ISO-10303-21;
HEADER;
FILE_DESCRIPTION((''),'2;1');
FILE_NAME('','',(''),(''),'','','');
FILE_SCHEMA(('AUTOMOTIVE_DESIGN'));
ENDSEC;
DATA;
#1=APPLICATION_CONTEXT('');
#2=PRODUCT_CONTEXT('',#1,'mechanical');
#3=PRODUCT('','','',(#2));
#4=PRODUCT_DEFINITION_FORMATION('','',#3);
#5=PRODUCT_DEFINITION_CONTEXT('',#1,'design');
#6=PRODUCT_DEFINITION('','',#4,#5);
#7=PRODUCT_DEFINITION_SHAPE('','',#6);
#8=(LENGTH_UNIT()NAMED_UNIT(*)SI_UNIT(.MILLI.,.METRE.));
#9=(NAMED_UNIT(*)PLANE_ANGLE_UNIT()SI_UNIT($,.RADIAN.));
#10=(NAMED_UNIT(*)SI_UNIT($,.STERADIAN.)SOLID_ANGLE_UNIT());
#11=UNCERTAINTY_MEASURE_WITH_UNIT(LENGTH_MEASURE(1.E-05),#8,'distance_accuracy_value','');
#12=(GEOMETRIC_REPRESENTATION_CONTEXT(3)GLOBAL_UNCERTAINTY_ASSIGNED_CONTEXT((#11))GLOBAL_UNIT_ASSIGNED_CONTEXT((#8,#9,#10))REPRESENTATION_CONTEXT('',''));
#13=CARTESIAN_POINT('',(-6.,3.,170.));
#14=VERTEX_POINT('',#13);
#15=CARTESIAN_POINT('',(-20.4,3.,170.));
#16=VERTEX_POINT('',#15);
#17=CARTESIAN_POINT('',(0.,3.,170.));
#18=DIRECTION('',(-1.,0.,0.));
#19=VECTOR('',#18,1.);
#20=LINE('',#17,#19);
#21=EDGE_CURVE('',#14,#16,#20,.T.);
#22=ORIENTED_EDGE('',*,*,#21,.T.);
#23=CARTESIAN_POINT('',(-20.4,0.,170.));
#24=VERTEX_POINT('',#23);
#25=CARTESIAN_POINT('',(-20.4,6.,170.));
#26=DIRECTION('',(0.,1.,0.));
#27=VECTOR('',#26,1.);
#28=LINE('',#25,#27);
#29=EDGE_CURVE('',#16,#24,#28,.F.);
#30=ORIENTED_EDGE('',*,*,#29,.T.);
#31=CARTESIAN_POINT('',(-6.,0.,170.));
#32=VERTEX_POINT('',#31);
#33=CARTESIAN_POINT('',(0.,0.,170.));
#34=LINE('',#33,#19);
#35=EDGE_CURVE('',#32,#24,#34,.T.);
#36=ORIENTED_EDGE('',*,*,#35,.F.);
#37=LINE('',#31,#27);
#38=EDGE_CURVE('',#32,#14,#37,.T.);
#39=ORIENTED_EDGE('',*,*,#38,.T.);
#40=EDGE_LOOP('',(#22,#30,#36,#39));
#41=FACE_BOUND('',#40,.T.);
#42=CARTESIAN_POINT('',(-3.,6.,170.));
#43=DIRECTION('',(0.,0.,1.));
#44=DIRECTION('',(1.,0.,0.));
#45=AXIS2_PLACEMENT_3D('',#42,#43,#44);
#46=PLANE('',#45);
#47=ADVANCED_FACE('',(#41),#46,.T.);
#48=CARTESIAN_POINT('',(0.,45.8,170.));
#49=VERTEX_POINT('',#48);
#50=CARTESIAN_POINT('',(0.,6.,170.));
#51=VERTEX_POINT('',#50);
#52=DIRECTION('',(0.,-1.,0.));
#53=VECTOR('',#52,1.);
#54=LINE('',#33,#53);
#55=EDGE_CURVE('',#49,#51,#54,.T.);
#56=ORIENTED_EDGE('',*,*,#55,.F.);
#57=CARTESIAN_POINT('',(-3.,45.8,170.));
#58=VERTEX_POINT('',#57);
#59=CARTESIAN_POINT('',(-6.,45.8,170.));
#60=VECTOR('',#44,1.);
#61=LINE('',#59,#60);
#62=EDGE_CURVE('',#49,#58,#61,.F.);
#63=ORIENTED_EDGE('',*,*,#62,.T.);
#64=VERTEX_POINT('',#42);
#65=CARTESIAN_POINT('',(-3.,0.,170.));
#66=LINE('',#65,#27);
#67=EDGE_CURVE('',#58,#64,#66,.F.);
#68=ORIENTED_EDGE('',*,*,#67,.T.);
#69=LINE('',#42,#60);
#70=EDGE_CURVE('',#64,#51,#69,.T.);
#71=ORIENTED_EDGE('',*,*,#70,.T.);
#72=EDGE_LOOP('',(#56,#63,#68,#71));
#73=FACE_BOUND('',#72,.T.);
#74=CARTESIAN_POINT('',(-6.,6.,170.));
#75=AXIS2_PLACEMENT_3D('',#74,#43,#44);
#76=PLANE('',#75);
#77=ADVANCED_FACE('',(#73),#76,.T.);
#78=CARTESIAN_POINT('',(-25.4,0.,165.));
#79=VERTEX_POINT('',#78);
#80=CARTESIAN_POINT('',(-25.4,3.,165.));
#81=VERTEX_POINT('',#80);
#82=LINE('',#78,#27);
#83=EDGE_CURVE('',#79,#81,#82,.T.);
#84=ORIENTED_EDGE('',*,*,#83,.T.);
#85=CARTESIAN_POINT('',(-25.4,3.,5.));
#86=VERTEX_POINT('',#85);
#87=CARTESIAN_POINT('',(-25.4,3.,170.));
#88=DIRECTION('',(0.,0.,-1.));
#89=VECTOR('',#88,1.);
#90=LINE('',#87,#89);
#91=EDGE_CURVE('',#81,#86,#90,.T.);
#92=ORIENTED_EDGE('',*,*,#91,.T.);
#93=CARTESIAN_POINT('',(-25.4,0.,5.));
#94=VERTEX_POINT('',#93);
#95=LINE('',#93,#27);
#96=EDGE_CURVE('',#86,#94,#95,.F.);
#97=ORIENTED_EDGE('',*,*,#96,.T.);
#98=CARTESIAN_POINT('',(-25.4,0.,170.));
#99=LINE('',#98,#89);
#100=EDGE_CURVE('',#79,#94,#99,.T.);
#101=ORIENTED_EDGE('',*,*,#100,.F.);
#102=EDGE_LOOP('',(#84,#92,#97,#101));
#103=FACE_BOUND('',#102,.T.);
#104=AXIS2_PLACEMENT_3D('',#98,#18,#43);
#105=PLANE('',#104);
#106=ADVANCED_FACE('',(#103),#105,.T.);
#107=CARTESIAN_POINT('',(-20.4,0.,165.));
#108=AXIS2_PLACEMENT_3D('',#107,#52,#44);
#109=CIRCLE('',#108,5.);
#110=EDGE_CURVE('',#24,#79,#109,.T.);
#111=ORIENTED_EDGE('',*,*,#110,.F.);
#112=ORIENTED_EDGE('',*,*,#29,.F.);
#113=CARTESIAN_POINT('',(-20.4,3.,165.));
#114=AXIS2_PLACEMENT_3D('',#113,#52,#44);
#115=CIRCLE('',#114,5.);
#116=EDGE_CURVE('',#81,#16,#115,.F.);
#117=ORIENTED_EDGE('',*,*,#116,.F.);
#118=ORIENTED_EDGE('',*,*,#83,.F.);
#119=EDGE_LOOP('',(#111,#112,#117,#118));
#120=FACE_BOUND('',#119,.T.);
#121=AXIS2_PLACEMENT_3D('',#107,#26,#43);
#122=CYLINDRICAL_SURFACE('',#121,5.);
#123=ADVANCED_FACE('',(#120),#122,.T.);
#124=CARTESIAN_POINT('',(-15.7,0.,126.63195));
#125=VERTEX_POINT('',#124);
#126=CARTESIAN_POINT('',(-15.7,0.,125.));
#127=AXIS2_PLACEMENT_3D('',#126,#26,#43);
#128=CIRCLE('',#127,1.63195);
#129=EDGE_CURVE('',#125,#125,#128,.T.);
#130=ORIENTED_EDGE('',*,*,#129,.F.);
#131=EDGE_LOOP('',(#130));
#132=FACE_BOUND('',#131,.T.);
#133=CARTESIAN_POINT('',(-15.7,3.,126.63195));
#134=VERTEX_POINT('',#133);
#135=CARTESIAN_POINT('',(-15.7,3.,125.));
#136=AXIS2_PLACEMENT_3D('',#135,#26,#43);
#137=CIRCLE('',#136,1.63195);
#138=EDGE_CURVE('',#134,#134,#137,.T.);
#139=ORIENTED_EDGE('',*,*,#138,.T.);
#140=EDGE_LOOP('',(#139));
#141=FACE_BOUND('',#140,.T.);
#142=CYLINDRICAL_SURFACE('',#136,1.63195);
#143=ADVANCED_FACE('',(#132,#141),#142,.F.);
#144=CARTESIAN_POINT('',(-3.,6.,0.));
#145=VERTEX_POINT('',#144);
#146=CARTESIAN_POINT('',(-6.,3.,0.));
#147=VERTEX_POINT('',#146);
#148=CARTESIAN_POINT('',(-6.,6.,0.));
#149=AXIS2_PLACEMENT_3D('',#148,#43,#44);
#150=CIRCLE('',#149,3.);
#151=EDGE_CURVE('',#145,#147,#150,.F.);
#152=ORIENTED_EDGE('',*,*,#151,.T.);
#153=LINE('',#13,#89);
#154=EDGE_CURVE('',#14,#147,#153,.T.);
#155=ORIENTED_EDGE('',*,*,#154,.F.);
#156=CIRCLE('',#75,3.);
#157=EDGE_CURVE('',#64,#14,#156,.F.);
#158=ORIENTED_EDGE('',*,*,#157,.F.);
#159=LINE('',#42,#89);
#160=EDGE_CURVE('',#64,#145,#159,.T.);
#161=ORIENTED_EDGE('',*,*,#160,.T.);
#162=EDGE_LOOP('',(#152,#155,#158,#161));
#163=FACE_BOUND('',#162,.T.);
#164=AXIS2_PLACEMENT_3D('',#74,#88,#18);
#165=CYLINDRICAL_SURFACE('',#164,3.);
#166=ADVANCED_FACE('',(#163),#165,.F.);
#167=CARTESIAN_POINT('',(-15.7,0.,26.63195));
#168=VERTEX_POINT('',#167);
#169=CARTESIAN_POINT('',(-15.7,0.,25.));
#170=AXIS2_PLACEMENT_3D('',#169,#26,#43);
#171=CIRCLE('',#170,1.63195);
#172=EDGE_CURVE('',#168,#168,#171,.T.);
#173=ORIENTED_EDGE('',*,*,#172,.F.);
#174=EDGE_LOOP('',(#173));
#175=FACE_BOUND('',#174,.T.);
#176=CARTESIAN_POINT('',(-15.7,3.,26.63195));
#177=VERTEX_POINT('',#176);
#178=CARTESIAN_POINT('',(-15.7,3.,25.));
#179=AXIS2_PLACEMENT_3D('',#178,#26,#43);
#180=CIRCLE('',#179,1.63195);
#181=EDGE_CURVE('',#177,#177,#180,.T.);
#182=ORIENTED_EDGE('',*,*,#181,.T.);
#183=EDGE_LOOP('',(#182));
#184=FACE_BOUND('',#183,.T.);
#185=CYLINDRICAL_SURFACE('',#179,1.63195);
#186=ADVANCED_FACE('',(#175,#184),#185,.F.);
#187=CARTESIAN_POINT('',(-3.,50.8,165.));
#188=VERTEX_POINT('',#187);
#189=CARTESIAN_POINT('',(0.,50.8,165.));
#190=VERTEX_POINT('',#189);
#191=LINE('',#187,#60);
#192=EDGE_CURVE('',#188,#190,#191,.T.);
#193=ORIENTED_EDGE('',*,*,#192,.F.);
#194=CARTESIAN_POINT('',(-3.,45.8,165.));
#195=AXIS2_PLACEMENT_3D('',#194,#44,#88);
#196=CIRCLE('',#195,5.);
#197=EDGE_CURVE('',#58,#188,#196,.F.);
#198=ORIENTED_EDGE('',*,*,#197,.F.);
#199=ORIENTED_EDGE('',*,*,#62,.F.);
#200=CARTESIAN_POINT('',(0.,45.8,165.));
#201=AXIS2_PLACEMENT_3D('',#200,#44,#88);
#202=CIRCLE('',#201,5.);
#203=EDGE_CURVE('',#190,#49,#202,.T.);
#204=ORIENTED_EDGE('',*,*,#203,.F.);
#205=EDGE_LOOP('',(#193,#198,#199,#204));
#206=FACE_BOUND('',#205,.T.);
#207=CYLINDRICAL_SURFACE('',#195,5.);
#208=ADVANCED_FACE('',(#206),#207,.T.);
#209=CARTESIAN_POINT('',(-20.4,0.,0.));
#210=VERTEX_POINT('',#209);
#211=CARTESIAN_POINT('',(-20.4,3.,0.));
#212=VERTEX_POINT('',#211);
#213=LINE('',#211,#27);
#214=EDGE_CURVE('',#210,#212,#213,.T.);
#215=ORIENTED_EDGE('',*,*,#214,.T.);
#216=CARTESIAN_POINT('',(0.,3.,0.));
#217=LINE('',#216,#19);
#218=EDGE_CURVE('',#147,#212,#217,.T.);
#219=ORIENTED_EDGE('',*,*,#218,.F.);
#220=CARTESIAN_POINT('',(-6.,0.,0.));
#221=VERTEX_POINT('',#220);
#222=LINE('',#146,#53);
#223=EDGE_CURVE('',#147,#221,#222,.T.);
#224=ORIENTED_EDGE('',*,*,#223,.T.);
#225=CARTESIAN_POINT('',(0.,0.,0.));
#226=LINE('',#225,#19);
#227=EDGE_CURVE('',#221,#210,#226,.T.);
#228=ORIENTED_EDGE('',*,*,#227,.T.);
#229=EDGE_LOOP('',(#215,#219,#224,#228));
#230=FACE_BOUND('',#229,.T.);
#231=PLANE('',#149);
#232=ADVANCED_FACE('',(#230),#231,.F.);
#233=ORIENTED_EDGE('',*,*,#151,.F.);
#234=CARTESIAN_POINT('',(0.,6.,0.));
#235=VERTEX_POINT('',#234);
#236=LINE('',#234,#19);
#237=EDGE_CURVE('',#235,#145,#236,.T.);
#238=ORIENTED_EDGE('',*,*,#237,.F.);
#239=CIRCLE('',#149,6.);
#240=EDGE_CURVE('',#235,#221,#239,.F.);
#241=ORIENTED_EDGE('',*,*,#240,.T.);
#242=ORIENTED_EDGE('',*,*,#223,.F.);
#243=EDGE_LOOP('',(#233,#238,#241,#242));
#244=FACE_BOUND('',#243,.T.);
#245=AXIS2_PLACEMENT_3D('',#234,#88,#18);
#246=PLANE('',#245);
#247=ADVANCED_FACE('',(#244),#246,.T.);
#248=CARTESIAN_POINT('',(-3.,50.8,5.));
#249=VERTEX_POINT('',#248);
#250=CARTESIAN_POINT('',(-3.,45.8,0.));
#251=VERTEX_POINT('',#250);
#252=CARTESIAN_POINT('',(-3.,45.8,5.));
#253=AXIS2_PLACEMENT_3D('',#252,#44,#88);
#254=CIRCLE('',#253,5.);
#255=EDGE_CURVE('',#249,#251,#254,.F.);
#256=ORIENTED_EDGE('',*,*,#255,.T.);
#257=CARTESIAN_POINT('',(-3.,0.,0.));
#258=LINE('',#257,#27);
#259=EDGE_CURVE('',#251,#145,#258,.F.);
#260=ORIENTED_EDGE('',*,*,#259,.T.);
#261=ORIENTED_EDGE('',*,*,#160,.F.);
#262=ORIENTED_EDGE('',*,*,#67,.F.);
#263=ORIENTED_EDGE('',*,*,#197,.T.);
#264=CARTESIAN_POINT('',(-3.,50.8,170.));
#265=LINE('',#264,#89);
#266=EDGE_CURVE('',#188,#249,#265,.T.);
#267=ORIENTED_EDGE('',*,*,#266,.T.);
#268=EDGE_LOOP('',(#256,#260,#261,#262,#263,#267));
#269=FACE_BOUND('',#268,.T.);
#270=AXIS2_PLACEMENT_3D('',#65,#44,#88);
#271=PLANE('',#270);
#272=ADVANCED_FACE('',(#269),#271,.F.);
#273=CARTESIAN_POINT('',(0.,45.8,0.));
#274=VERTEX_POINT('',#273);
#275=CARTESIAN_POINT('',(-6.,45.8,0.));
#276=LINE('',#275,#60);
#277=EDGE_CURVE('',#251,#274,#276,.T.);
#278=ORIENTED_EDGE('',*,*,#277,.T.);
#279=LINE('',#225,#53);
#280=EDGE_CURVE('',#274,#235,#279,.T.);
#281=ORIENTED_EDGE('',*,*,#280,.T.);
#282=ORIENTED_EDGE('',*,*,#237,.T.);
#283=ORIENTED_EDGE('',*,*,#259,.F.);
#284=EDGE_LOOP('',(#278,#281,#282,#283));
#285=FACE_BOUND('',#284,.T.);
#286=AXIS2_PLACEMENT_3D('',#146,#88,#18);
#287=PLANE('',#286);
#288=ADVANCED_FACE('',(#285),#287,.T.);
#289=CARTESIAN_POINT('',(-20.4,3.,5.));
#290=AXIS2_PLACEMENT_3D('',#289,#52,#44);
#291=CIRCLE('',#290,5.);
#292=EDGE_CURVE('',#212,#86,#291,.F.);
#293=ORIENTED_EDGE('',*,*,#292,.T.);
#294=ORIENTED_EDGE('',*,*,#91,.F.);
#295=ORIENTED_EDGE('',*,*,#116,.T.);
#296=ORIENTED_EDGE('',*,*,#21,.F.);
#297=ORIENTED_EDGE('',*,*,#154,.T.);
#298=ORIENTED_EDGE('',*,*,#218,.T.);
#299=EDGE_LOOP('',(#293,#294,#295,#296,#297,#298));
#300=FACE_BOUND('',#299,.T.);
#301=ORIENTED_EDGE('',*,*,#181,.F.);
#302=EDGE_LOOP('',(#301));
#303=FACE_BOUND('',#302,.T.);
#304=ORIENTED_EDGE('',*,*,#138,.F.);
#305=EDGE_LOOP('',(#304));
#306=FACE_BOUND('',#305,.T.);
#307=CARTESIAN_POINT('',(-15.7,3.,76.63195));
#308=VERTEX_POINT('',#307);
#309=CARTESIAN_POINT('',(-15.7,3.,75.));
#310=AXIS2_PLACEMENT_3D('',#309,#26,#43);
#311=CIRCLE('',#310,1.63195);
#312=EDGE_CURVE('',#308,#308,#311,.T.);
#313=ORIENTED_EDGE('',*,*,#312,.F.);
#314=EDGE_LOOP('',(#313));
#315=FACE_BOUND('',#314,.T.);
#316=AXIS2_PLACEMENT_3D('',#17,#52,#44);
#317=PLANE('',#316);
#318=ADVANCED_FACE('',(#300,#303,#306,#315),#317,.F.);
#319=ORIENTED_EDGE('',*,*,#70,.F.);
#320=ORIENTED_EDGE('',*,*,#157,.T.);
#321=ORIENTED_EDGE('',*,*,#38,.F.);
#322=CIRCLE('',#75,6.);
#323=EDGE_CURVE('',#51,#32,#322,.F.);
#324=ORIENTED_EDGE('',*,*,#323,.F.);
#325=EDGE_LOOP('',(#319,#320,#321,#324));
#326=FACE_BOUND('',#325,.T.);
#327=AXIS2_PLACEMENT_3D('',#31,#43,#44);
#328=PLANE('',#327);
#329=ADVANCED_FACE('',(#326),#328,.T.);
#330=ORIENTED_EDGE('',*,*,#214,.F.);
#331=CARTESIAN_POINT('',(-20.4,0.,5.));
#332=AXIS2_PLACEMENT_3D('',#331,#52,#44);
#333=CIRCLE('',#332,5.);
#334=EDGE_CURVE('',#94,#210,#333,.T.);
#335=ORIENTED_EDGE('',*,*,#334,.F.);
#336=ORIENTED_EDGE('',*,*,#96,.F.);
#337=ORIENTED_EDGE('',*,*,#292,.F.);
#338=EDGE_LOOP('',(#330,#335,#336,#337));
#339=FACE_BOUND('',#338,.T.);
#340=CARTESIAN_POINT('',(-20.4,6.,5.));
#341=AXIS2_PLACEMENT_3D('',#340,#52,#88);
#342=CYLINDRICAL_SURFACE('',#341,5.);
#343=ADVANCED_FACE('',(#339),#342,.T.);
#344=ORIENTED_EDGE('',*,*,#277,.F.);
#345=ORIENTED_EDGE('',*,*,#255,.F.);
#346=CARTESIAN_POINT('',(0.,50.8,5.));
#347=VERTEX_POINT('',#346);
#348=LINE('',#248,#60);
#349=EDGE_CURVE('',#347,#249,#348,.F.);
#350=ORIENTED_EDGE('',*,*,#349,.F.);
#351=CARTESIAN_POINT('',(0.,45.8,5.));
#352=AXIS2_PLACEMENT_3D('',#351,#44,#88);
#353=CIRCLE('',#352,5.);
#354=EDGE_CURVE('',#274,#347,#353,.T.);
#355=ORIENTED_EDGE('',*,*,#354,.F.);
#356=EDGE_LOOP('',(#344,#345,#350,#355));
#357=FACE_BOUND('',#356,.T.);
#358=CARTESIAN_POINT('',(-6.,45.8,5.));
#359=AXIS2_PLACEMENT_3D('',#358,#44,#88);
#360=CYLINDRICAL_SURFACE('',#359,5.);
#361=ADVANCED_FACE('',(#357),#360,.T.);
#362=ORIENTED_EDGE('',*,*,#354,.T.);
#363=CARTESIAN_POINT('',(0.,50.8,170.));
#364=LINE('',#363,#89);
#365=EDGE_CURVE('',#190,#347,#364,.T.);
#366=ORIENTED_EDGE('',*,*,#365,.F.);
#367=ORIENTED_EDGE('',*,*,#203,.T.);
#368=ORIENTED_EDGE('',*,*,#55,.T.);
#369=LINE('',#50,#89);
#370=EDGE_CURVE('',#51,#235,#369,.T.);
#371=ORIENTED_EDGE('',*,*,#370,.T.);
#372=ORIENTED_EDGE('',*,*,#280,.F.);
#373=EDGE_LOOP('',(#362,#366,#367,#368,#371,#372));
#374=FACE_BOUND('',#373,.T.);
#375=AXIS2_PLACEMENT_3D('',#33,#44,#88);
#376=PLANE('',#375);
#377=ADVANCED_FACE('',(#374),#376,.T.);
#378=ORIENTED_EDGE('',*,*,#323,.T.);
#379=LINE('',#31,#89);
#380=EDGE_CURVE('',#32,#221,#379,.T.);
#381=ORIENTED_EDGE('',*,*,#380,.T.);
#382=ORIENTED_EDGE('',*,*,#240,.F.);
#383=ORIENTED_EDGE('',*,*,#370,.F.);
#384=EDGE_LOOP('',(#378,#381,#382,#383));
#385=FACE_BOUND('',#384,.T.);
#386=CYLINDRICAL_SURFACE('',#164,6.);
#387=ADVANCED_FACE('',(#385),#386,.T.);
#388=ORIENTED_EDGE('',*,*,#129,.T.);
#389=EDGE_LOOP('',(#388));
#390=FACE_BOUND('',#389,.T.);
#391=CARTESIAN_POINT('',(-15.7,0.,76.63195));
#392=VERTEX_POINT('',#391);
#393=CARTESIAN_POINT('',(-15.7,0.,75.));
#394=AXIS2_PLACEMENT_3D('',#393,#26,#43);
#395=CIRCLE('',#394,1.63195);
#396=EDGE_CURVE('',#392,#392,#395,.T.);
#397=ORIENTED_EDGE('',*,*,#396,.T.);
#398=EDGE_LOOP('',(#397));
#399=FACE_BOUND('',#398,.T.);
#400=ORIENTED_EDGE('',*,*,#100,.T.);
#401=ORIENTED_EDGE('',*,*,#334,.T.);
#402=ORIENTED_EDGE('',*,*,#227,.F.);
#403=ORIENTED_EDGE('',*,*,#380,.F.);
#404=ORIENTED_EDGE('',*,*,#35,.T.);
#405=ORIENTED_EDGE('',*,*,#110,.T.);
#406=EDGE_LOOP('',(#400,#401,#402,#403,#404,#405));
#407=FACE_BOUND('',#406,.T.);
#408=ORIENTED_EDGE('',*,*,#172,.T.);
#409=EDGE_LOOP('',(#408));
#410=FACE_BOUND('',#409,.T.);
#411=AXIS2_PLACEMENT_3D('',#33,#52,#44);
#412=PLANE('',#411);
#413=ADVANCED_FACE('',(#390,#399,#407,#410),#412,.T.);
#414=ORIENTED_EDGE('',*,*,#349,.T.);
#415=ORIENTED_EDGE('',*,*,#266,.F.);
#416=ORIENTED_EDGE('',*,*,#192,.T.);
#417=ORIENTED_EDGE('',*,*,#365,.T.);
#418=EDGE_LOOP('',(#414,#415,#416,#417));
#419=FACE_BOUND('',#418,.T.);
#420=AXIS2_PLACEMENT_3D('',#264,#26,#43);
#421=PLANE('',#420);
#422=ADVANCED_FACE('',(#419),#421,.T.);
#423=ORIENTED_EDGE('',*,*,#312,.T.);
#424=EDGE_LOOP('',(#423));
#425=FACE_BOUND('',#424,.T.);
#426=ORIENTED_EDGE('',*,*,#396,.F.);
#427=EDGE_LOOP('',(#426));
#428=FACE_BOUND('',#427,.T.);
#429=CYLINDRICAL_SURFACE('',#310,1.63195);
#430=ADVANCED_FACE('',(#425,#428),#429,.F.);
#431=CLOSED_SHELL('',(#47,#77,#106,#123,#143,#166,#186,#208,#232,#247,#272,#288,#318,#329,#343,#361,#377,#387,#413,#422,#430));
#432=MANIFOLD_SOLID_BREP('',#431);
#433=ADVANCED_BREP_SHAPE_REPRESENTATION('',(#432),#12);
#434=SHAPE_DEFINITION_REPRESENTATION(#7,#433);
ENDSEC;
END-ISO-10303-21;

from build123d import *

# Parameters (mm, degrees)
BASE_FLANGE1_DEPTH           = 170
F_30_0_1285_DIAMETER_HOLE1_D = 3.2639
FILLET1_R                    = 5


# Sheet-metal steps are written as plain solids
with BuildPart() as part:
    # Sketch1 → Base-Flange1 (new body)
    with BuildSketch(Plane.XY):
        with BuildLine():
            Line((-25.4, 0), (-6, 0))
            ThreePointArc((-6, 0), (-1.757359313, 1.757359313), (0, 6))
            Line((0, 6), (0, 50.8))
            Line((0, 50.8), (-3, 50.8))
            Line((-3, 50.8), (-3, 6))
            ThreePointArc((-3, 6), (-3.878679656, 3.878679656), (-6, 3))
            Line((-6, 3), (-25.4, 3))
            Line((-25.4, 3), (-25.4, 0))
        make_face()
    extrude(amount=BASE_FLANGE1_DEPTH)

    # #30 (0.1285) Diameter Hole1 (through all)
    with Locations(Plane(origin=(0, 3, 0), x_dir=(1, 0, 0), z_dir=(0, 1, 0))):
        with Locations((-15.7, -25), (-15.7, -75), (-15.7, -125)):
            Hole(F_30_0_1285_DIAMETER_HOLE1_D / 2)

    # Fillet1
    fillet1_edges = [part.edges().sort_by_distance(p)[0] for p in [
        (-1.5, 50.8, 170),
        (-1.5, 50.8, 0),
        (-25.4, 1.5, 170),
        (-25.4, 1.5, 0),
    ]]
    fillet(fillet1_edges, radius=FILLET1_R)


solid = part.part
